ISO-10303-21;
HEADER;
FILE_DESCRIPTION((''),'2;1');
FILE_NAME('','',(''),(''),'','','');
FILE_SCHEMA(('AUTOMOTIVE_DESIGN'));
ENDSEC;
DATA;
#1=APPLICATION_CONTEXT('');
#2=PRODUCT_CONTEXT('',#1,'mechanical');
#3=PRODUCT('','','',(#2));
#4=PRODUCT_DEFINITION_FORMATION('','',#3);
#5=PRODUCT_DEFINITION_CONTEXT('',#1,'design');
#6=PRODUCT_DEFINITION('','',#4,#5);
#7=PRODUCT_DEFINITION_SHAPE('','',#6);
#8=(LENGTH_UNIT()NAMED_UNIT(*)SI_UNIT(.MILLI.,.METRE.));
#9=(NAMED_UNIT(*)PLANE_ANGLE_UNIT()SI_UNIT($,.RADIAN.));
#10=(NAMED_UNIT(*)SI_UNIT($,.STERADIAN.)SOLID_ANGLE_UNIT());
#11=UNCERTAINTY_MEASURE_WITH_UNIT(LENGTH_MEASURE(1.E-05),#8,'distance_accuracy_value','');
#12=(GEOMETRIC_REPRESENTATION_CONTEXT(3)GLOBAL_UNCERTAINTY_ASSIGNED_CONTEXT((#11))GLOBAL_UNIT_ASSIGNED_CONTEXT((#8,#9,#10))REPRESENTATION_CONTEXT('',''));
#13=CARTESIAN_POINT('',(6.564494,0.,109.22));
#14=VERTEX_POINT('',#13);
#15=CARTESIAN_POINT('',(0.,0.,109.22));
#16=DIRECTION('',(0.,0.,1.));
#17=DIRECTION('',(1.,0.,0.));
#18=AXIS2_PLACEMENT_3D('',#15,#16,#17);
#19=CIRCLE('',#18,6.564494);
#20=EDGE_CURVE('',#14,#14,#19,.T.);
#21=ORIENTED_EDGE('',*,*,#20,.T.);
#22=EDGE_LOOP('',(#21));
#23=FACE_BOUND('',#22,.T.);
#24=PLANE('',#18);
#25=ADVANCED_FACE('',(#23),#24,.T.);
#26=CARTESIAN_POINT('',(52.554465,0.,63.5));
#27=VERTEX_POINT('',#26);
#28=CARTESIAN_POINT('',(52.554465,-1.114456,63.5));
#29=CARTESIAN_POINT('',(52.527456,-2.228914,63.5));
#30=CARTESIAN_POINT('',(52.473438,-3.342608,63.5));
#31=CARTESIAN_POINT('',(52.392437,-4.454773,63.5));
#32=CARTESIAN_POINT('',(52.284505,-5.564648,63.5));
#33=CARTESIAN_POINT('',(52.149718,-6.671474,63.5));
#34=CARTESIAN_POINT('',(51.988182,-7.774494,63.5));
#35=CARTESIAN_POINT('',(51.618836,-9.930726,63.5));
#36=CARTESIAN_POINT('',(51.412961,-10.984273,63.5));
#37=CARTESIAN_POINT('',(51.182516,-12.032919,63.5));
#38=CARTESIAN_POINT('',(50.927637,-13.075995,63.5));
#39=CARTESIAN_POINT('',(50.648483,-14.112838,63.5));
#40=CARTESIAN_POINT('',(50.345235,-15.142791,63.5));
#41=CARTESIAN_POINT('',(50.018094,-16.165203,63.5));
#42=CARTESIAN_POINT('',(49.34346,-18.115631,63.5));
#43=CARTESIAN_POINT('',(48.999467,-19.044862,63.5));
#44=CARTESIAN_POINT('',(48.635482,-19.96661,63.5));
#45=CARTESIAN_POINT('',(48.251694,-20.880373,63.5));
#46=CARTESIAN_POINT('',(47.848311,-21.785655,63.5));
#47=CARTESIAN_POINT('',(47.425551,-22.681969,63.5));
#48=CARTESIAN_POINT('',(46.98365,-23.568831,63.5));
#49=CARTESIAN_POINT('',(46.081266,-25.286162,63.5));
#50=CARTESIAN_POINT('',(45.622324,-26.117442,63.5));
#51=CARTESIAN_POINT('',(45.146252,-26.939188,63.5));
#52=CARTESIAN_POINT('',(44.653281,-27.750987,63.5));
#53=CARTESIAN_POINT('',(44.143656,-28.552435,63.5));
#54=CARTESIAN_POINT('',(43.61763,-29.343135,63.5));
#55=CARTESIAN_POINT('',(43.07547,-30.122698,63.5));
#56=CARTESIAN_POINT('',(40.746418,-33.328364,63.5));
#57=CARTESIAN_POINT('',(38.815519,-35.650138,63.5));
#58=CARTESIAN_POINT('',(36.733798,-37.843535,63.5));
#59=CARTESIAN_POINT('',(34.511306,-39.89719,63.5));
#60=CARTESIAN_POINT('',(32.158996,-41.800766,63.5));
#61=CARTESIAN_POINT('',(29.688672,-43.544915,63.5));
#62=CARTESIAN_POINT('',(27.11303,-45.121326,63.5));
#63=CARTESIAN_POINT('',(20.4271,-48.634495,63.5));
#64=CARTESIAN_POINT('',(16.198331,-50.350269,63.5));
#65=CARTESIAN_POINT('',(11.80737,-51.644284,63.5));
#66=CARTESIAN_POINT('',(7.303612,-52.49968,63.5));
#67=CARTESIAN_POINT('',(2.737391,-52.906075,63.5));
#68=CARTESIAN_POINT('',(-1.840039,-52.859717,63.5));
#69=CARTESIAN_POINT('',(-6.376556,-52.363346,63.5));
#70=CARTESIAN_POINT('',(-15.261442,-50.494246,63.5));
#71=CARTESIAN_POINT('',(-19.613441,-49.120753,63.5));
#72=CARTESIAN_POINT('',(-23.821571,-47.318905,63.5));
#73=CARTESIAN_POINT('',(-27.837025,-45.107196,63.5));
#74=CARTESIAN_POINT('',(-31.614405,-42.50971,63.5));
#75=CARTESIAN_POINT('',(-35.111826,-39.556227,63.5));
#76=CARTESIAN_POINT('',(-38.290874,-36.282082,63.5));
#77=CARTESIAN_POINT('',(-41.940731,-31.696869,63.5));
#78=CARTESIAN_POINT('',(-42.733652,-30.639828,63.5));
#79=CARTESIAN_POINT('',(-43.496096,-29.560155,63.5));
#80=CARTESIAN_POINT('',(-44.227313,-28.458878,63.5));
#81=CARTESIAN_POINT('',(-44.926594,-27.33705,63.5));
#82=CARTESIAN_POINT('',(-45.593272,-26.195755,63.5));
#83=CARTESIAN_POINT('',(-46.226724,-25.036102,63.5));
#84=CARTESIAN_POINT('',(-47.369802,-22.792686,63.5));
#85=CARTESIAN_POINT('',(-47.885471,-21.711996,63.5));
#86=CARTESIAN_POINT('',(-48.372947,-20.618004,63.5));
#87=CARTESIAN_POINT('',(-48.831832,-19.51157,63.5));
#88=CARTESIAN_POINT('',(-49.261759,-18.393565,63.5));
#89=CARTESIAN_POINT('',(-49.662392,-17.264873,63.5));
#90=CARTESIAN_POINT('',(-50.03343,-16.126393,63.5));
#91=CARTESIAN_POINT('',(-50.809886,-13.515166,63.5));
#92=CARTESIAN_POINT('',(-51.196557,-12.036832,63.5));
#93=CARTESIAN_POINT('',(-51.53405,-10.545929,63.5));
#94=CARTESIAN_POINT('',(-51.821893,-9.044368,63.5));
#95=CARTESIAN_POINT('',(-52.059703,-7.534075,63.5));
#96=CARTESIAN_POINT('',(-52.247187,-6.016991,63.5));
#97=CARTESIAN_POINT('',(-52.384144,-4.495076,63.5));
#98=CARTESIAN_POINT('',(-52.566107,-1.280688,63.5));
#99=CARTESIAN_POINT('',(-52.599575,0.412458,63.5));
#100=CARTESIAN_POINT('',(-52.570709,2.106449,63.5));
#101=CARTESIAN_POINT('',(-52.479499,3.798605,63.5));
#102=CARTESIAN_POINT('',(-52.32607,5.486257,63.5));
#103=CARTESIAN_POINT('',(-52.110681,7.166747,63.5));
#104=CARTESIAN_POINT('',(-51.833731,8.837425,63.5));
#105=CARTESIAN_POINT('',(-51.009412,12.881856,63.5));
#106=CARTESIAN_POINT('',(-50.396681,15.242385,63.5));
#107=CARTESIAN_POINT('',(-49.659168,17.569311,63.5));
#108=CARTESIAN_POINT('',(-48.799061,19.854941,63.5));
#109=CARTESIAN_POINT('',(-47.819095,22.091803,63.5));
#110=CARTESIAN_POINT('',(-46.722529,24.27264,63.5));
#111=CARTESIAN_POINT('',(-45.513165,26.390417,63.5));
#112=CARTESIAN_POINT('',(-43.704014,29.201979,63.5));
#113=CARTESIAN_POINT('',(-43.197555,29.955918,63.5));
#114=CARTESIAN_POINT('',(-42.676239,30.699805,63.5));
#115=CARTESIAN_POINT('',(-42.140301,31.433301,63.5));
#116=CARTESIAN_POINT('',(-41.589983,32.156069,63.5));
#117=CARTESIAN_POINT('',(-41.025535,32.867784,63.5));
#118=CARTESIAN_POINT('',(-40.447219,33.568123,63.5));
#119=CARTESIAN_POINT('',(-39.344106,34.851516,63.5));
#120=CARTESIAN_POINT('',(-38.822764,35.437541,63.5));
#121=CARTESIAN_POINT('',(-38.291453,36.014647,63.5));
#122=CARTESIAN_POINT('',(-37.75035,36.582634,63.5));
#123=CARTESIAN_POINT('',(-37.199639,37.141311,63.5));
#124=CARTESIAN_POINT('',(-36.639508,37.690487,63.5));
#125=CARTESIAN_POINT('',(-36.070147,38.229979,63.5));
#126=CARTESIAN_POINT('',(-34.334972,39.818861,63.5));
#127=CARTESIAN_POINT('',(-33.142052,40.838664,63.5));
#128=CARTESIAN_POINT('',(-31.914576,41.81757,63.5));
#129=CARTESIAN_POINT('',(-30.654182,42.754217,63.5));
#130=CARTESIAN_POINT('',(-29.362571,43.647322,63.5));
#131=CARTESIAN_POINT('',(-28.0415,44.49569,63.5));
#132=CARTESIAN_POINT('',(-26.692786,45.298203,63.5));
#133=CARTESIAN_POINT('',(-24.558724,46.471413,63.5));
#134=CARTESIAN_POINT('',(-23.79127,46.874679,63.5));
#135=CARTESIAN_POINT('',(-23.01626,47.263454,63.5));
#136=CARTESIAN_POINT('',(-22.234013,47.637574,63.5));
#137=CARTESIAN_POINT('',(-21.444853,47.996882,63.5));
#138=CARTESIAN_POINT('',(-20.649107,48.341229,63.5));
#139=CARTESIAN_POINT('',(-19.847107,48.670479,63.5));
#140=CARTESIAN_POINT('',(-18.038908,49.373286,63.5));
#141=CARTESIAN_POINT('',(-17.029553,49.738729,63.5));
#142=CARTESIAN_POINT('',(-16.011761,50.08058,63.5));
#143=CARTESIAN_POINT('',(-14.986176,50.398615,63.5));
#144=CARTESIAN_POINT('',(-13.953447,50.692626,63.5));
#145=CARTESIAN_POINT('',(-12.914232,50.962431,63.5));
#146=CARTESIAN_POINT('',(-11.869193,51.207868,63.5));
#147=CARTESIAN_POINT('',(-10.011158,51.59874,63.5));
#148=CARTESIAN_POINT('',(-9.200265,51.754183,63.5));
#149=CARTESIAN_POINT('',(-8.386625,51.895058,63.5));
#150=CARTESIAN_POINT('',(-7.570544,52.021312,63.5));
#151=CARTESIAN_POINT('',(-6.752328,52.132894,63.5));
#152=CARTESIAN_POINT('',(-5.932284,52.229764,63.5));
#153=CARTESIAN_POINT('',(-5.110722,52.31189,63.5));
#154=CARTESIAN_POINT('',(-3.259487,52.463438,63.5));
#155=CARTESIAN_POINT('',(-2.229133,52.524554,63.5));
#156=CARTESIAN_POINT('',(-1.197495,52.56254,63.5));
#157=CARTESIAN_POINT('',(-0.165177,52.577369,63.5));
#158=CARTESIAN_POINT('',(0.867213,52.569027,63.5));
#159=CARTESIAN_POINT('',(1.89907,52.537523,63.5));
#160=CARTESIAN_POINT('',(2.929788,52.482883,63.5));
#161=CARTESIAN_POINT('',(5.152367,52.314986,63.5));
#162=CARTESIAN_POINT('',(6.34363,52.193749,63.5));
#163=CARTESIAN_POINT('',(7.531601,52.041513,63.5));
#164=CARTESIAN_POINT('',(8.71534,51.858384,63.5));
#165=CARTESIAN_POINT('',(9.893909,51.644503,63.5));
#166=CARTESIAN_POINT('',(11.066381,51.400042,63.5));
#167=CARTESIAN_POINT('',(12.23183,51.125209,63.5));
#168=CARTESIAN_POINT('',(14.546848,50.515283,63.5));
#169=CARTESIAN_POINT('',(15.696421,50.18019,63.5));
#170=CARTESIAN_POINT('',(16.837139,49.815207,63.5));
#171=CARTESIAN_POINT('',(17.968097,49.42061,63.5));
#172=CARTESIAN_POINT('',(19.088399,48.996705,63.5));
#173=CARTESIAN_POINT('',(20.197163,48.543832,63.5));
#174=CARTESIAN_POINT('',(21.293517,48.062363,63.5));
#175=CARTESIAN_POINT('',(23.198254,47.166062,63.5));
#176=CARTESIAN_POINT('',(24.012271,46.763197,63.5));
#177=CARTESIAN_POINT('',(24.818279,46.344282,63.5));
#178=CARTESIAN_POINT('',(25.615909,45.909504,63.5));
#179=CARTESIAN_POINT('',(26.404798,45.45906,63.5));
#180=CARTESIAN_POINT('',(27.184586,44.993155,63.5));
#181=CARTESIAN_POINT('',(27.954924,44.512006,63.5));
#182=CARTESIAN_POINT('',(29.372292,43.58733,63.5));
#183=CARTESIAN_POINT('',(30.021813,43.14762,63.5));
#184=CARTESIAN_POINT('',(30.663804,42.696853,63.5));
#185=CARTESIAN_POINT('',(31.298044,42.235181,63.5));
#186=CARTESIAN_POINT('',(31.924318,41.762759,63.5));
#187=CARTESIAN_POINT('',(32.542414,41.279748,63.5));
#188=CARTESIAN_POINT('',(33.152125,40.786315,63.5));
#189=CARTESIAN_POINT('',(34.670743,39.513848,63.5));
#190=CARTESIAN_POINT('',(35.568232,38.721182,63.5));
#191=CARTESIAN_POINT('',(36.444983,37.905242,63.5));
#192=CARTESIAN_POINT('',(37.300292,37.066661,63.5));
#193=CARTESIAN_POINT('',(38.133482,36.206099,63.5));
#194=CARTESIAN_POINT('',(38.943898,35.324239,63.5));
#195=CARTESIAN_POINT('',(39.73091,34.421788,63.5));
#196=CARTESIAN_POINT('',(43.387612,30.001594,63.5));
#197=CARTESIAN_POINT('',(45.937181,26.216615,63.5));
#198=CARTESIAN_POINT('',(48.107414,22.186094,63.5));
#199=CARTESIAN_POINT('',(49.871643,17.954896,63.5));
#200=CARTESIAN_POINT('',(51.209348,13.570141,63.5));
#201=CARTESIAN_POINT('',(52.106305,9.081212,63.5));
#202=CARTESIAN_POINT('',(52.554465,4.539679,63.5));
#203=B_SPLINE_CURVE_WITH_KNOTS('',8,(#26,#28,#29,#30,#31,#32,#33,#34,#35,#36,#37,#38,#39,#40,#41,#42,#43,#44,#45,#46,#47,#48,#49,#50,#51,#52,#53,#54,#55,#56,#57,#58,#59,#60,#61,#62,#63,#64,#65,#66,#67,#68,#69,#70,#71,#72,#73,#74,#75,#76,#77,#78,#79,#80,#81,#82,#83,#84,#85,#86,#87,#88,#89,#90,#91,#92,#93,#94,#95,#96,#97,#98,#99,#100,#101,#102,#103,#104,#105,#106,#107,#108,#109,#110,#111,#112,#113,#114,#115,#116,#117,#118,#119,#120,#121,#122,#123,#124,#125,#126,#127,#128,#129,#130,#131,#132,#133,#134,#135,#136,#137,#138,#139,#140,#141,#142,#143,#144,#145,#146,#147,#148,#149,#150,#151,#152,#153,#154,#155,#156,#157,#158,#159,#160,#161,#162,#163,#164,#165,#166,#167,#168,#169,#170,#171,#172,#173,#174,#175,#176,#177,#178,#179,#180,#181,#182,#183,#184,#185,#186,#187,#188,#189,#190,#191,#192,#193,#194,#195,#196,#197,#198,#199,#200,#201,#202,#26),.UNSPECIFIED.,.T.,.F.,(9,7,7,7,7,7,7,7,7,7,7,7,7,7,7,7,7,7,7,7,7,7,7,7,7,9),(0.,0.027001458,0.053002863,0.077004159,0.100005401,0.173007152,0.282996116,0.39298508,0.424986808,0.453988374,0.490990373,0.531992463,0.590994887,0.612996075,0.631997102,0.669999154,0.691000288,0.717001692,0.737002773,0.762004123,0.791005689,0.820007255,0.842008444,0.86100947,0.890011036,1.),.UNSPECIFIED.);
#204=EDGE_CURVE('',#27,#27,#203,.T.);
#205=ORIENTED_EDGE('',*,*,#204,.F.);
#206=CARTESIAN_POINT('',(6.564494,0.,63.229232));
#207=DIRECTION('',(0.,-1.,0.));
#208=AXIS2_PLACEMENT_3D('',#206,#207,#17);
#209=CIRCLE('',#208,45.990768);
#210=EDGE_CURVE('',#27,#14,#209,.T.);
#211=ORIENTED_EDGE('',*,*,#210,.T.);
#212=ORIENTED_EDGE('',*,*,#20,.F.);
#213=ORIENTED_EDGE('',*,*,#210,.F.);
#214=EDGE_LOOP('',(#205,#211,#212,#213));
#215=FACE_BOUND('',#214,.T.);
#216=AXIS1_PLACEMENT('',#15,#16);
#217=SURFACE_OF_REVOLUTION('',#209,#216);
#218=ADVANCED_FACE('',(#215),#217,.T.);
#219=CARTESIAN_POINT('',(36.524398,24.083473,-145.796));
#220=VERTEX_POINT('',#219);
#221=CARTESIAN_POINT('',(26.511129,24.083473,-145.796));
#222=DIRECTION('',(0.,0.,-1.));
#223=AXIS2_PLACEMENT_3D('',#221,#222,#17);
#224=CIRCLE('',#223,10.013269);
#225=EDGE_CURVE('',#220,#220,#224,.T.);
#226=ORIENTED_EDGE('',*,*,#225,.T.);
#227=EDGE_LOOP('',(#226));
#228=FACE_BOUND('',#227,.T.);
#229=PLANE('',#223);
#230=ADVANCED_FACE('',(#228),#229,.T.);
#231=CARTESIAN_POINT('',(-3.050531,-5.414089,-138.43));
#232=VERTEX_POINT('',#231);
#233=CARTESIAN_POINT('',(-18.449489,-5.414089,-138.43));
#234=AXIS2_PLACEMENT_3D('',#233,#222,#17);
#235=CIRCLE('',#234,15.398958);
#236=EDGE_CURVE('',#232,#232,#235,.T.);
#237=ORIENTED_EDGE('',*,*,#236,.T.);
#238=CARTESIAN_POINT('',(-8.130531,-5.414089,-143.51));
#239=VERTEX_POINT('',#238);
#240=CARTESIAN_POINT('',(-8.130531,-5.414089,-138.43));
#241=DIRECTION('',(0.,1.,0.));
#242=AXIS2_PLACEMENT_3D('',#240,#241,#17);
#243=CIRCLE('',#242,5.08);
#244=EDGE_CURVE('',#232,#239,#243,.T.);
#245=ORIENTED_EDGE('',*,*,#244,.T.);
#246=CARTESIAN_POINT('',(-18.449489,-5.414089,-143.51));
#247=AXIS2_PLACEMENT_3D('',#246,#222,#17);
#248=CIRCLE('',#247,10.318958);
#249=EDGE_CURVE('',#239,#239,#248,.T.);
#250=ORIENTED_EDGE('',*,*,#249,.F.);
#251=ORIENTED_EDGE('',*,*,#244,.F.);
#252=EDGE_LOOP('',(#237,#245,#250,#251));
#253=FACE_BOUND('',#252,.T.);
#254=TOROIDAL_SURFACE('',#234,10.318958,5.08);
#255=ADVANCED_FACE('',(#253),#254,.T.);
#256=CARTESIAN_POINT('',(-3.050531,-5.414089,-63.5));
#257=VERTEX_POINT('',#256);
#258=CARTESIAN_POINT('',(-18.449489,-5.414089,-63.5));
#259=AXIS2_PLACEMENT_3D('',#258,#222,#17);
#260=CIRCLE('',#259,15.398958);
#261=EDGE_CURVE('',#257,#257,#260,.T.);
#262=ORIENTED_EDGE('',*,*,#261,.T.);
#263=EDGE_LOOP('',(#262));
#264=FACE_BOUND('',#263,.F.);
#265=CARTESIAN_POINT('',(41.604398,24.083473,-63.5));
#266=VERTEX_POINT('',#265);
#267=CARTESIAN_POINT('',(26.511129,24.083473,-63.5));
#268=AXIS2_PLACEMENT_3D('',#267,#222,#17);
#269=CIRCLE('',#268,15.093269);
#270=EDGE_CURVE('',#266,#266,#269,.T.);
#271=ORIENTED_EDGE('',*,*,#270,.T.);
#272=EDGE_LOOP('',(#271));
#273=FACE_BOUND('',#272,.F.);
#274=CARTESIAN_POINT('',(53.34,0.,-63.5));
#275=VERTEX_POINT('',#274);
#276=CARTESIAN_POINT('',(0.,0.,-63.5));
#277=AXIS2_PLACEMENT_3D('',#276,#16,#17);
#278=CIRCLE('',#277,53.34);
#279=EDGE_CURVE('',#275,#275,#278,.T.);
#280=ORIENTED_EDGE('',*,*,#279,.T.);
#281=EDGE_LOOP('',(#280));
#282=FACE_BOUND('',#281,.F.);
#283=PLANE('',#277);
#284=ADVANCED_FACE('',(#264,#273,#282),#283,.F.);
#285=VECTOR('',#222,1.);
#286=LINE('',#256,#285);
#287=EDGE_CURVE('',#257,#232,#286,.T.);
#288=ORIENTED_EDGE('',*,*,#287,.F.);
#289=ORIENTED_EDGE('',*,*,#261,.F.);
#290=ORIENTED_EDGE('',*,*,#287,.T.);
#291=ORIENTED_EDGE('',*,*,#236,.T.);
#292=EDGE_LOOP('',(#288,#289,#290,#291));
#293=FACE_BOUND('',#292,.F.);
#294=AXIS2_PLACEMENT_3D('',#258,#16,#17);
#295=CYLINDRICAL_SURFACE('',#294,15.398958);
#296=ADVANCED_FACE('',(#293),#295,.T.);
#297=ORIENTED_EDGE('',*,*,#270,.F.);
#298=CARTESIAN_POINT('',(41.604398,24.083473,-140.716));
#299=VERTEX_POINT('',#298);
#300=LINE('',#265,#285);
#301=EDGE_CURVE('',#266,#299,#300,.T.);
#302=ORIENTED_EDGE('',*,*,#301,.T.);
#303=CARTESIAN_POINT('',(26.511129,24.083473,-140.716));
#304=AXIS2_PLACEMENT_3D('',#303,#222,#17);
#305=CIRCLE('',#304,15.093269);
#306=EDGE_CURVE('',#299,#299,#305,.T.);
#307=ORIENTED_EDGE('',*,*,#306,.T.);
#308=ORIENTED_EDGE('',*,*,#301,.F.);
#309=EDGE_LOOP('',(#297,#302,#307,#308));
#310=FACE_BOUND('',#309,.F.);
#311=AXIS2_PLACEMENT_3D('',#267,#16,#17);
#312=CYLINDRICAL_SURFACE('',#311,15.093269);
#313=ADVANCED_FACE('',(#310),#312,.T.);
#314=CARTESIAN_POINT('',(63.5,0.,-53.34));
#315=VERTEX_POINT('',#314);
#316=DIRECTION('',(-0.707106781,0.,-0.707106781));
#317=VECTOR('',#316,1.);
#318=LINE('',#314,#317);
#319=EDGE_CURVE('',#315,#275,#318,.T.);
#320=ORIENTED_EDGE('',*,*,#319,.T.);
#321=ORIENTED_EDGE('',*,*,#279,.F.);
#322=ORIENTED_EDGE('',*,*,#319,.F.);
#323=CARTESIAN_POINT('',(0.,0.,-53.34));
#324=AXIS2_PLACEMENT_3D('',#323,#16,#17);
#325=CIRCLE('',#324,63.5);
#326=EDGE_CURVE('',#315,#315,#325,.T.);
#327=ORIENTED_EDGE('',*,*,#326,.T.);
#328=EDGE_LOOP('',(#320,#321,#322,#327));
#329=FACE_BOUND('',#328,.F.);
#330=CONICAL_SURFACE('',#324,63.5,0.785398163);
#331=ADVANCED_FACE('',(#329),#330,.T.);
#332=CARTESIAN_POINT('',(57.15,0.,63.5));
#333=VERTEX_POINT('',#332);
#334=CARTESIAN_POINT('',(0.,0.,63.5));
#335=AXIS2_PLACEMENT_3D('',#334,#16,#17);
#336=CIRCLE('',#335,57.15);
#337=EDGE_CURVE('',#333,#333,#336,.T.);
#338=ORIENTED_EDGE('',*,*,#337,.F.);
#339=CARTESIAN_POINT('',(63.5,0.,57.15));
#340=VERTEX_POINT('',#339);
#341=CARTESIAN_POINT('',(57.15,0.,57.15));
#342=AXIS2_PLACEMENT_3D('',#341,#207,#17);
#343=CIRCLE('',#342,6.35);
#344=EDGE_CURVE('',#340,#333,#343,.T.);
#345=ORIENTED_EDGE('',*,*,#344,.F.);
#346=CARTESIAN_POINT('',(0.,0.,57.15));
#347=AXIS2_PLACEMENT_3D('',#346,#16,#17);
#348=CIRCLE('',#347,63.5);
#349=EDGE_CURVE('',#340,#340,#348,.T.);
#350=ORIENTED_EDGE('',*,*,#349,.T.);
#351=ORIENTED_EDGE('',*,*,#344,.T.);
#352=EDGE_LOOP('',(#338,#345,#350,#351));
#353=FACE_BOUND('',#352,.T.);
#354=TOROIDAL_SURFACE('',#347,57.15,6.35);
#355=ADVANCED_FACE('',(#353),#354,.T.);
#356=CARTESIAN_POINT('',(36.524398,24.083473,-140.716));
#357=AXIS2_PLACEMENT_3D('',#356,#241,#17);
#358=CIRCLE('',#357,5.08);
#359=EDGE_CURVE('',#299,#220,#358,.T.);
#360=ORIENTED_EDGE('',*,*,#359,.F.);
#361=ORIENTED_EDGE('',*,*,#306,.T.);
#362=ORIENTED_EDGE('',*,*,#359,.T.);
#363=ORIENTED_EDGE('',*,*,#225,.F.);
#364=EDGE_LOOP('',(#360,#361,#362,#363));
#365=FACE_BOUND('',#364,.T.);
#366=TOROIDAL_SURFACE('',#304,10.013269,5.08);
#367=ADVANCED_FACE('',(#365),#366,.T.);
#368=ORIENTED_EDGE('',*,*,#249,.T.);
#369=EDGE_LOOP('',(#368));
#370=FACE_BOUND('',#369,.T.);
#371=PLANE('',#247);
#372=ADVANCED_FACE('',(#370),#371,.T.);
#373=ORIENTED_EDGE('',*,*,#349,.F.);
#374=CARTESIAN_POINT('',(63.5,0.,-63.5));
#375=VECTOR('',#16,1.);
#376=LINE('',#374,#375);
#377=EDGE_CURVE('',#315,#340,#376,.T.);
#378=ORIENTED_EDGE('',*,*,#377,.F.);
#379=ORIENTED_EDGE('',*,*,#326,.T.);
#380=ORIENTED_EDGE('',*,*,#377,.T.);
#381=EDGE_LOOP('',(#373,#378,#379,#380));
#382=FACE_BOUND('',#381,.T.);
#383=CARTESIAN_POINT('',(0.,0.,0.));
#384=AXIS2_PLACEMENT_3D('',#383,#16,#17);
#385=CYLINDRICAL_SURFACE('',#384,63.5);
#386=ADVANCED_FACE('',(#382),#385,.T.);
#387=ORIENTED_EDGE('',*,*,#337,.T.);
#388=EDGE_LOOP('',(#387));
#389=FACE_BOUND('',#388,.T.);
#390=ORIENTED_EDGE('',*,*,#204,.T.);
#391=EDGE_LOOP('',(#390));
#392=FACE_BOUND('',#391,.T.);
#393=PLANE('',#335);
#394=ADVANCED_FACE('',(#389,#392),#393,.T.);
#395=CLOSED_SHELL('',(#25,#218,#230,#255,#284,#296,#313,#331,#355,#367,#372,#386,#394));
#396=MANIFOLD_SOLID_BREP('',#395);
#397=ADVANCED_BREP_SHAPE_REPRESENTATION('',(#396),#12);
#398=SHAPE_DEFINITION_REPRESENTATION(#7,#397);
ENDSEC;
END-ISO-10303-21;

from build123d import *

# Parameters (mm, degrees)
F0_R          = 63.5
F1_DEPTH      = 63.5
F1_DEPTH_BACK = 63.5
F2_SIZE       = 10.16
F3_R          = 6.35
F4_R          = 52.5552622302
F5_DEPTH      = 45.72
F8_R          = 15.0932692433
F9_DEPTH      = 82.296
F10_R         = 5.08
F11_R         = 15.3989584518
F12_DEPTH     = 80.01
F13_R         = 5.08


# Not quite as in the source:
# - a fillet or chamfer that OpenCascade refuses, or shapes differently, is made with other operations: its cross-section is extruded or revolved along the edge and cut away or added


with BuildPart() as f1:
    # F0 (on Top) → F1 (new body, two sides)
    with BuildSketch(Plane.XY) as f1_sk:
        Circle(F0_R)
    extrude(amount=F1_DEPTH)
    extrude(f1_sk.sketch, amount=-F1_DEPTH_BACK)

    # F2
    f2_edges = [f1.edges().sort_by_distance(p)[0] for p in [
        (-63.5, 0, -63.5),
    ]]
    chamfer(f2_edges, length=F2_SIZE)

    # F3
    f3_edges = [f1.edges().sort_by_distance(p)[0] for p in [
        (-63.5, 0, 63.5),
    ]]
    fillet(f3_edges, radius=F3_R)

    # F4 (on face) → F5 (join)
    with BuildSketch(Plane.XY.offset(63.5)):
        Circle(F4_R)
    extrude(amount=F5_DEPTH)

    # F6: fillet of radius 45.9907683632 on 1 edges, made by hand


with BuildPart() as f6_tool2:
    # F6_s3 → F6_t4 (revolve)
    with BuildSketch(Plane.XZ):
        with BuildLine():
            ThreePointArc((52.5552622302, 63.2292316368), (39.0848780486, 95.7496158184), (6.564493867, 109.22))
            Line((6.564493867, 109.22), (52.5552622302, 109.22))
            Line((52.5552622302, 109.22), (52.5552622302, 63.2292316368))
        make_face()
    revolve(axis=Axis((0, 0, 109.22), (0, 0, 1)))

    split(bisect_by=Plane.XY.offset(63.5), keep=Keep.TOP)


with BuildPart() as f1_1:
    add(f1.part)

    # F6_t1: cut F6_tool2
    add(f6_tool2.part, mode=Mode.SUBTRACT)

    # F8 (on face) → F9 (join)
    with BuildSketch(Plane(origin=(0, 0, -63.5), x_dir=(1, 0, 0), z_dir=(0, 0, -1))):
        with Locations((26.5111289918, -24.0834727883)):
            Circle(F8_R)
    extrude(amount=F9_DEPTH)

    # F10
    f10_edges = [f1_1.edges().sort_by_distance(p)[0] for p in [
        (11.41786, 24.083473, -145.796),
    ]]
    fillet(f10_edges, radius=F10_R)

    # F11 (on face) → F12 (join)
    with BuildSketch(Plane(origin=(0, 0, -63.5), x_dir=(1, 0, 0), z_dir=(0, 0, -1))):
        with Locations((-18.4494890273, 5.414089188)):
            Circle(F11_R)
    extrude(amount=F12_DEPTH)

    # F13
    f13_edges = [f1_1.edges().sort_by_distance(p)[0] for p in [
        (-33.848447, -5.414089, -143.51),
    ]]
    fillet(f13_edges, radius=F13_R)


solid = f1_1.part
